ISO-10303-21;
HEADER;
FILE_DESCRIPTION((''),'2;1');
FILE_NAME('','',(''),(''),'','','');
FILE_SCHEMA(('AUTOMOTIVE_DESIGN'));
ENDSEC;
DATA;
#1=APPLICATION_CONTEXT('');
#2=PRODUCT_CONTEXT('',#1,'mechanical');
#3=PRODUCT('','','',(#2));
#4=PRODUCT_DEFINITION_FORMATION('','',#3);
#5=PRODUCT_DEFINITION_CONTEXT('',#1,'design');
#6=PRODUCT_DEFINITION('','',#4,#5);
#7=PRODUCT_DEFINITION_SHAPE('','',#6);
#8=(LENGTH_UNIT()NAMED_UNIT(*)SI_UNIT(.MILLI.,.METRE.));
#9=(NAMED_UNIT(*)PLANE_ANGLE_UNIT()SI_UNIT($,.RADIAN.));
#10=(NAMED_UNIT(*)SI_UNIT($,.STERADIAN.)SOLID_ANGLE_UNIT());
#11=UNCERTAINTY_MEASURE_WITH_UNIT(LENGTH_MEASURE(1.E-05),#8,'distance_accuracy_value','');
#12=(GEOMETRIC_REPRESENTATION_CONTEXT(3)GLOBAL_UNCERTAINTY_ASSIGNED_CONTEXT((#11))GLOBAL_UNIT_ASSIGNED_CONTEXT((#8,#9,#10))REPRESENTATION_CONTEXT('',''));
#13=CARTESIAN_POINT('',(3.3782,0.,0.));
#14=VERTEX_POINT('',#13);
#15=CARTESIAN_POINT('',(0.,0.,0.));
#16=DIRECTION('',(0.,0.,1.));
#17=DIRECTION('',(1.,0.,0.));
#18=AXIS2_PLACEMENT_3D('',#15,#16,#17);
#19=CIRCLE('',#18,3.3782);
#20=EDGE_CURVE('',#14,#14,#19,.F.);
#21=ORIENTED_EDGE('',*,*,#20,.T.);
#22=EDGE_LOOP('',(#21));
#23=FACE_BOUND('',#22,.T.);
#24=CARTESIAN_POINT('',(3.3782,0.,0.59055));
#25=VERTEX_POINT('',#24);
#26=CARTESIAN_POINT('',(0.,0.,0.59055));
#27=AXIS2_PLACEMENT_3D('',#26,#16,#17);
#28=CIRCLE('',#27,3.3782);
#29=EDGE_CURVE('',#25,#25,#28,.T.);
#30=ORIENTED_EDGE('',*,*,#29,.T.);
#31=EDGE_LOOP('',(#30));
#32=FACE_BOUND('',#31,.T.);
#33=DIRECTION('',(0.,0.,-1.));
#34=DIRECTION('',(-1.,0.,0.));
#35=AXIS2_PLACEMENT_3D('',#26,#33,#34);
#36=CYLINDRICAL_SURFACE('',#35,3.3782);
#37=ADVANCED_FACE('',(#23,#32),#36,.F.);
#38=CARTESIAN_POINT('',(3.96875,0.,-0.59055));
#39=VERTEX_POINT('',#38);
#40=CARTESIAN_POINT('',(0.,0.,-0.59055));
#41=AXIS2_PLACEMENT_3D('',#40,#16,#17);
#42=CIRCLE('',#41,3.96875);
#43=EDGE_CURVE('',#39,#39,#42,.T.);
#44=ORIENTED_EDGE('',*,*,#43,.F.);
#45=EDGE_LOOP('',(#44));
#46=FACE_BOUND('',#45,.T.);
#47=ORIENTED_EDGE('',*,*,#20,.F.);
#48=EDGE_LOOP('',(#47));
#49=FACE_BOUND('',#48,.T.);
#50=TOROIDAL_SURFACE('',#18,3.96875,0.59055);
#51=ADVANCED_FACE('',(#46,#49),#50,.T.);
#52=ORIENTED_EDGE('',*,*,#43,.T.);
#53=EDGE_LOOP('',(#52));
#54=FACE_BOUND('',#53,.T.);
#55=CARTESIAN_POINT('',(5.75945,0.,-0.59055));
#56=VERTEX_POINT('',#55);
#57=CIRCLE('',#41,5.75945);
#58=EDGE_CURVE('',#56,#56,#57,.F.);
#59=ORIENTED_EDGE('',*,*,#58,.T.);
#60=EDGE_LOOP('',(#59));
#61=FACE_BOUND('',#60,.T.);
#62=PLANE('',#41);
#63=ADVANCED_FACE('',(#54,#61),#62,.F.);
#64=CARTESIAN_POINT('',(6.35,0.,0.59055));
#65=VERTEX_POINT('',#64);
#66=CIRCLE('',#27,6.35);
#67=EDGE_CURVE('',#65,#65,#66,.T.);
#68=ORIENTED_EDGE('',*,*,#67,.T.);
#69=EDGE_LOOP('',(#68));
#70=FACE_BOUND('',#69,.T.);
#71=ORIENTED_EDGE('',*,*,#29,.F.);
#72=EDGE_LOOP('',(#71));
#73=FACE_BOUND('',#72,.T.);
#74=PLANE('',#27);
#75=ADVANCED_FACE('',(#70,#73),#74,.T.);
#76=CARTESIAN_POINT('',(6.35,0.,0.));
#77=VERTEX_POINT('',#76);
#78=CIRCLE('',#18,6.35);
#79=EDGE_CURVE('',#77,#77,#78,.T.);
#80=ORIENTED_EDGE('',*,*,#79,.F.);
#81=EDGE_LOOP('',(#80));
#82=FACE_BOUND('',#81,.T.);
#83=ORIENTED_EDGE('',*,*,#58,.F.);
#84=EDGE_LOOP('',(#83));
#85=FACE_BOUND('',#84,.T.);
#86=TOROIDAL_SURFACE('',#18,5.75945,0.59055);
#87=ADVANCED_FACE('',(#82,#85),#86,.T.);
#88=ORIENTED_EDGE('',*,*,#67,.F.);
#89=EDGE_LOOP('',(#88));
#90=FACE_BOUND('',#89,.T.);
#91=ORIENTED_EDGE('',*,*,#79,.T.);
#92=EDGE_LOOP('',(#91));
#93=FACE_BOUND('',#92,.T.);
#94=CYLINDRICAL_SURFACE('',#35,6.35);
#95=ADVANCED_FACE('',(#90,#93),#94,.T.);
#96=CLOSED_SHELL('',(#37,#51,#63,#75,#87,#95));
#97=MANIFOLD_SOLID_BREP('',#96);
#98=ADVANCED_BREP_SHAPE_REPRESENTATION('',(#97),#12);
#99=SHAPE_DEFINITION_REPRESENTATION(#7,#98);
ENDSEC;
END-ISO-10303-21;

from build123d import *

# Parameters (mm, degrees)
BOSS_EXTRUDE1_DEPTH      = 0.59055
BOSS_EXTRUDE1_DEPTH_BACK = 0.59055
SKETCH3_R                = 6.35
SKETCH3_R_2              = 3.3782
FILLET1_R                = 0.59055


with BuildPart() as part:
    # Sketch3 → Boss-Extrude1 (new, two sides: drawn at the far end of the back side and taken through both)
    with BuildSketch(Plane.XY.offset(-BOSS_EXTRUDE1_DEPTH_BACK)):
        Circle(SKETCH3_R)
        Circle(SKETCH3_R_2, mode=Mode.SUBTRACT)
    extrude(amount=BOSS_EXTRUDE1_DEPTH + BOSS_EXTRUDE1_DEPTH_BACK)

    # Fillet1
    fillet1_edges = [part.edges().sort_by_distance(p)[0] for p in [
        (-6.35, 0, -0.59055),
        (-3.3782, 0, -0.59055),
    ]]
    fillet(fillet1_edges, radius=FILLET1_R - 0.0001)  # a hair under: the kernel refuses the full size


solid = part.part
